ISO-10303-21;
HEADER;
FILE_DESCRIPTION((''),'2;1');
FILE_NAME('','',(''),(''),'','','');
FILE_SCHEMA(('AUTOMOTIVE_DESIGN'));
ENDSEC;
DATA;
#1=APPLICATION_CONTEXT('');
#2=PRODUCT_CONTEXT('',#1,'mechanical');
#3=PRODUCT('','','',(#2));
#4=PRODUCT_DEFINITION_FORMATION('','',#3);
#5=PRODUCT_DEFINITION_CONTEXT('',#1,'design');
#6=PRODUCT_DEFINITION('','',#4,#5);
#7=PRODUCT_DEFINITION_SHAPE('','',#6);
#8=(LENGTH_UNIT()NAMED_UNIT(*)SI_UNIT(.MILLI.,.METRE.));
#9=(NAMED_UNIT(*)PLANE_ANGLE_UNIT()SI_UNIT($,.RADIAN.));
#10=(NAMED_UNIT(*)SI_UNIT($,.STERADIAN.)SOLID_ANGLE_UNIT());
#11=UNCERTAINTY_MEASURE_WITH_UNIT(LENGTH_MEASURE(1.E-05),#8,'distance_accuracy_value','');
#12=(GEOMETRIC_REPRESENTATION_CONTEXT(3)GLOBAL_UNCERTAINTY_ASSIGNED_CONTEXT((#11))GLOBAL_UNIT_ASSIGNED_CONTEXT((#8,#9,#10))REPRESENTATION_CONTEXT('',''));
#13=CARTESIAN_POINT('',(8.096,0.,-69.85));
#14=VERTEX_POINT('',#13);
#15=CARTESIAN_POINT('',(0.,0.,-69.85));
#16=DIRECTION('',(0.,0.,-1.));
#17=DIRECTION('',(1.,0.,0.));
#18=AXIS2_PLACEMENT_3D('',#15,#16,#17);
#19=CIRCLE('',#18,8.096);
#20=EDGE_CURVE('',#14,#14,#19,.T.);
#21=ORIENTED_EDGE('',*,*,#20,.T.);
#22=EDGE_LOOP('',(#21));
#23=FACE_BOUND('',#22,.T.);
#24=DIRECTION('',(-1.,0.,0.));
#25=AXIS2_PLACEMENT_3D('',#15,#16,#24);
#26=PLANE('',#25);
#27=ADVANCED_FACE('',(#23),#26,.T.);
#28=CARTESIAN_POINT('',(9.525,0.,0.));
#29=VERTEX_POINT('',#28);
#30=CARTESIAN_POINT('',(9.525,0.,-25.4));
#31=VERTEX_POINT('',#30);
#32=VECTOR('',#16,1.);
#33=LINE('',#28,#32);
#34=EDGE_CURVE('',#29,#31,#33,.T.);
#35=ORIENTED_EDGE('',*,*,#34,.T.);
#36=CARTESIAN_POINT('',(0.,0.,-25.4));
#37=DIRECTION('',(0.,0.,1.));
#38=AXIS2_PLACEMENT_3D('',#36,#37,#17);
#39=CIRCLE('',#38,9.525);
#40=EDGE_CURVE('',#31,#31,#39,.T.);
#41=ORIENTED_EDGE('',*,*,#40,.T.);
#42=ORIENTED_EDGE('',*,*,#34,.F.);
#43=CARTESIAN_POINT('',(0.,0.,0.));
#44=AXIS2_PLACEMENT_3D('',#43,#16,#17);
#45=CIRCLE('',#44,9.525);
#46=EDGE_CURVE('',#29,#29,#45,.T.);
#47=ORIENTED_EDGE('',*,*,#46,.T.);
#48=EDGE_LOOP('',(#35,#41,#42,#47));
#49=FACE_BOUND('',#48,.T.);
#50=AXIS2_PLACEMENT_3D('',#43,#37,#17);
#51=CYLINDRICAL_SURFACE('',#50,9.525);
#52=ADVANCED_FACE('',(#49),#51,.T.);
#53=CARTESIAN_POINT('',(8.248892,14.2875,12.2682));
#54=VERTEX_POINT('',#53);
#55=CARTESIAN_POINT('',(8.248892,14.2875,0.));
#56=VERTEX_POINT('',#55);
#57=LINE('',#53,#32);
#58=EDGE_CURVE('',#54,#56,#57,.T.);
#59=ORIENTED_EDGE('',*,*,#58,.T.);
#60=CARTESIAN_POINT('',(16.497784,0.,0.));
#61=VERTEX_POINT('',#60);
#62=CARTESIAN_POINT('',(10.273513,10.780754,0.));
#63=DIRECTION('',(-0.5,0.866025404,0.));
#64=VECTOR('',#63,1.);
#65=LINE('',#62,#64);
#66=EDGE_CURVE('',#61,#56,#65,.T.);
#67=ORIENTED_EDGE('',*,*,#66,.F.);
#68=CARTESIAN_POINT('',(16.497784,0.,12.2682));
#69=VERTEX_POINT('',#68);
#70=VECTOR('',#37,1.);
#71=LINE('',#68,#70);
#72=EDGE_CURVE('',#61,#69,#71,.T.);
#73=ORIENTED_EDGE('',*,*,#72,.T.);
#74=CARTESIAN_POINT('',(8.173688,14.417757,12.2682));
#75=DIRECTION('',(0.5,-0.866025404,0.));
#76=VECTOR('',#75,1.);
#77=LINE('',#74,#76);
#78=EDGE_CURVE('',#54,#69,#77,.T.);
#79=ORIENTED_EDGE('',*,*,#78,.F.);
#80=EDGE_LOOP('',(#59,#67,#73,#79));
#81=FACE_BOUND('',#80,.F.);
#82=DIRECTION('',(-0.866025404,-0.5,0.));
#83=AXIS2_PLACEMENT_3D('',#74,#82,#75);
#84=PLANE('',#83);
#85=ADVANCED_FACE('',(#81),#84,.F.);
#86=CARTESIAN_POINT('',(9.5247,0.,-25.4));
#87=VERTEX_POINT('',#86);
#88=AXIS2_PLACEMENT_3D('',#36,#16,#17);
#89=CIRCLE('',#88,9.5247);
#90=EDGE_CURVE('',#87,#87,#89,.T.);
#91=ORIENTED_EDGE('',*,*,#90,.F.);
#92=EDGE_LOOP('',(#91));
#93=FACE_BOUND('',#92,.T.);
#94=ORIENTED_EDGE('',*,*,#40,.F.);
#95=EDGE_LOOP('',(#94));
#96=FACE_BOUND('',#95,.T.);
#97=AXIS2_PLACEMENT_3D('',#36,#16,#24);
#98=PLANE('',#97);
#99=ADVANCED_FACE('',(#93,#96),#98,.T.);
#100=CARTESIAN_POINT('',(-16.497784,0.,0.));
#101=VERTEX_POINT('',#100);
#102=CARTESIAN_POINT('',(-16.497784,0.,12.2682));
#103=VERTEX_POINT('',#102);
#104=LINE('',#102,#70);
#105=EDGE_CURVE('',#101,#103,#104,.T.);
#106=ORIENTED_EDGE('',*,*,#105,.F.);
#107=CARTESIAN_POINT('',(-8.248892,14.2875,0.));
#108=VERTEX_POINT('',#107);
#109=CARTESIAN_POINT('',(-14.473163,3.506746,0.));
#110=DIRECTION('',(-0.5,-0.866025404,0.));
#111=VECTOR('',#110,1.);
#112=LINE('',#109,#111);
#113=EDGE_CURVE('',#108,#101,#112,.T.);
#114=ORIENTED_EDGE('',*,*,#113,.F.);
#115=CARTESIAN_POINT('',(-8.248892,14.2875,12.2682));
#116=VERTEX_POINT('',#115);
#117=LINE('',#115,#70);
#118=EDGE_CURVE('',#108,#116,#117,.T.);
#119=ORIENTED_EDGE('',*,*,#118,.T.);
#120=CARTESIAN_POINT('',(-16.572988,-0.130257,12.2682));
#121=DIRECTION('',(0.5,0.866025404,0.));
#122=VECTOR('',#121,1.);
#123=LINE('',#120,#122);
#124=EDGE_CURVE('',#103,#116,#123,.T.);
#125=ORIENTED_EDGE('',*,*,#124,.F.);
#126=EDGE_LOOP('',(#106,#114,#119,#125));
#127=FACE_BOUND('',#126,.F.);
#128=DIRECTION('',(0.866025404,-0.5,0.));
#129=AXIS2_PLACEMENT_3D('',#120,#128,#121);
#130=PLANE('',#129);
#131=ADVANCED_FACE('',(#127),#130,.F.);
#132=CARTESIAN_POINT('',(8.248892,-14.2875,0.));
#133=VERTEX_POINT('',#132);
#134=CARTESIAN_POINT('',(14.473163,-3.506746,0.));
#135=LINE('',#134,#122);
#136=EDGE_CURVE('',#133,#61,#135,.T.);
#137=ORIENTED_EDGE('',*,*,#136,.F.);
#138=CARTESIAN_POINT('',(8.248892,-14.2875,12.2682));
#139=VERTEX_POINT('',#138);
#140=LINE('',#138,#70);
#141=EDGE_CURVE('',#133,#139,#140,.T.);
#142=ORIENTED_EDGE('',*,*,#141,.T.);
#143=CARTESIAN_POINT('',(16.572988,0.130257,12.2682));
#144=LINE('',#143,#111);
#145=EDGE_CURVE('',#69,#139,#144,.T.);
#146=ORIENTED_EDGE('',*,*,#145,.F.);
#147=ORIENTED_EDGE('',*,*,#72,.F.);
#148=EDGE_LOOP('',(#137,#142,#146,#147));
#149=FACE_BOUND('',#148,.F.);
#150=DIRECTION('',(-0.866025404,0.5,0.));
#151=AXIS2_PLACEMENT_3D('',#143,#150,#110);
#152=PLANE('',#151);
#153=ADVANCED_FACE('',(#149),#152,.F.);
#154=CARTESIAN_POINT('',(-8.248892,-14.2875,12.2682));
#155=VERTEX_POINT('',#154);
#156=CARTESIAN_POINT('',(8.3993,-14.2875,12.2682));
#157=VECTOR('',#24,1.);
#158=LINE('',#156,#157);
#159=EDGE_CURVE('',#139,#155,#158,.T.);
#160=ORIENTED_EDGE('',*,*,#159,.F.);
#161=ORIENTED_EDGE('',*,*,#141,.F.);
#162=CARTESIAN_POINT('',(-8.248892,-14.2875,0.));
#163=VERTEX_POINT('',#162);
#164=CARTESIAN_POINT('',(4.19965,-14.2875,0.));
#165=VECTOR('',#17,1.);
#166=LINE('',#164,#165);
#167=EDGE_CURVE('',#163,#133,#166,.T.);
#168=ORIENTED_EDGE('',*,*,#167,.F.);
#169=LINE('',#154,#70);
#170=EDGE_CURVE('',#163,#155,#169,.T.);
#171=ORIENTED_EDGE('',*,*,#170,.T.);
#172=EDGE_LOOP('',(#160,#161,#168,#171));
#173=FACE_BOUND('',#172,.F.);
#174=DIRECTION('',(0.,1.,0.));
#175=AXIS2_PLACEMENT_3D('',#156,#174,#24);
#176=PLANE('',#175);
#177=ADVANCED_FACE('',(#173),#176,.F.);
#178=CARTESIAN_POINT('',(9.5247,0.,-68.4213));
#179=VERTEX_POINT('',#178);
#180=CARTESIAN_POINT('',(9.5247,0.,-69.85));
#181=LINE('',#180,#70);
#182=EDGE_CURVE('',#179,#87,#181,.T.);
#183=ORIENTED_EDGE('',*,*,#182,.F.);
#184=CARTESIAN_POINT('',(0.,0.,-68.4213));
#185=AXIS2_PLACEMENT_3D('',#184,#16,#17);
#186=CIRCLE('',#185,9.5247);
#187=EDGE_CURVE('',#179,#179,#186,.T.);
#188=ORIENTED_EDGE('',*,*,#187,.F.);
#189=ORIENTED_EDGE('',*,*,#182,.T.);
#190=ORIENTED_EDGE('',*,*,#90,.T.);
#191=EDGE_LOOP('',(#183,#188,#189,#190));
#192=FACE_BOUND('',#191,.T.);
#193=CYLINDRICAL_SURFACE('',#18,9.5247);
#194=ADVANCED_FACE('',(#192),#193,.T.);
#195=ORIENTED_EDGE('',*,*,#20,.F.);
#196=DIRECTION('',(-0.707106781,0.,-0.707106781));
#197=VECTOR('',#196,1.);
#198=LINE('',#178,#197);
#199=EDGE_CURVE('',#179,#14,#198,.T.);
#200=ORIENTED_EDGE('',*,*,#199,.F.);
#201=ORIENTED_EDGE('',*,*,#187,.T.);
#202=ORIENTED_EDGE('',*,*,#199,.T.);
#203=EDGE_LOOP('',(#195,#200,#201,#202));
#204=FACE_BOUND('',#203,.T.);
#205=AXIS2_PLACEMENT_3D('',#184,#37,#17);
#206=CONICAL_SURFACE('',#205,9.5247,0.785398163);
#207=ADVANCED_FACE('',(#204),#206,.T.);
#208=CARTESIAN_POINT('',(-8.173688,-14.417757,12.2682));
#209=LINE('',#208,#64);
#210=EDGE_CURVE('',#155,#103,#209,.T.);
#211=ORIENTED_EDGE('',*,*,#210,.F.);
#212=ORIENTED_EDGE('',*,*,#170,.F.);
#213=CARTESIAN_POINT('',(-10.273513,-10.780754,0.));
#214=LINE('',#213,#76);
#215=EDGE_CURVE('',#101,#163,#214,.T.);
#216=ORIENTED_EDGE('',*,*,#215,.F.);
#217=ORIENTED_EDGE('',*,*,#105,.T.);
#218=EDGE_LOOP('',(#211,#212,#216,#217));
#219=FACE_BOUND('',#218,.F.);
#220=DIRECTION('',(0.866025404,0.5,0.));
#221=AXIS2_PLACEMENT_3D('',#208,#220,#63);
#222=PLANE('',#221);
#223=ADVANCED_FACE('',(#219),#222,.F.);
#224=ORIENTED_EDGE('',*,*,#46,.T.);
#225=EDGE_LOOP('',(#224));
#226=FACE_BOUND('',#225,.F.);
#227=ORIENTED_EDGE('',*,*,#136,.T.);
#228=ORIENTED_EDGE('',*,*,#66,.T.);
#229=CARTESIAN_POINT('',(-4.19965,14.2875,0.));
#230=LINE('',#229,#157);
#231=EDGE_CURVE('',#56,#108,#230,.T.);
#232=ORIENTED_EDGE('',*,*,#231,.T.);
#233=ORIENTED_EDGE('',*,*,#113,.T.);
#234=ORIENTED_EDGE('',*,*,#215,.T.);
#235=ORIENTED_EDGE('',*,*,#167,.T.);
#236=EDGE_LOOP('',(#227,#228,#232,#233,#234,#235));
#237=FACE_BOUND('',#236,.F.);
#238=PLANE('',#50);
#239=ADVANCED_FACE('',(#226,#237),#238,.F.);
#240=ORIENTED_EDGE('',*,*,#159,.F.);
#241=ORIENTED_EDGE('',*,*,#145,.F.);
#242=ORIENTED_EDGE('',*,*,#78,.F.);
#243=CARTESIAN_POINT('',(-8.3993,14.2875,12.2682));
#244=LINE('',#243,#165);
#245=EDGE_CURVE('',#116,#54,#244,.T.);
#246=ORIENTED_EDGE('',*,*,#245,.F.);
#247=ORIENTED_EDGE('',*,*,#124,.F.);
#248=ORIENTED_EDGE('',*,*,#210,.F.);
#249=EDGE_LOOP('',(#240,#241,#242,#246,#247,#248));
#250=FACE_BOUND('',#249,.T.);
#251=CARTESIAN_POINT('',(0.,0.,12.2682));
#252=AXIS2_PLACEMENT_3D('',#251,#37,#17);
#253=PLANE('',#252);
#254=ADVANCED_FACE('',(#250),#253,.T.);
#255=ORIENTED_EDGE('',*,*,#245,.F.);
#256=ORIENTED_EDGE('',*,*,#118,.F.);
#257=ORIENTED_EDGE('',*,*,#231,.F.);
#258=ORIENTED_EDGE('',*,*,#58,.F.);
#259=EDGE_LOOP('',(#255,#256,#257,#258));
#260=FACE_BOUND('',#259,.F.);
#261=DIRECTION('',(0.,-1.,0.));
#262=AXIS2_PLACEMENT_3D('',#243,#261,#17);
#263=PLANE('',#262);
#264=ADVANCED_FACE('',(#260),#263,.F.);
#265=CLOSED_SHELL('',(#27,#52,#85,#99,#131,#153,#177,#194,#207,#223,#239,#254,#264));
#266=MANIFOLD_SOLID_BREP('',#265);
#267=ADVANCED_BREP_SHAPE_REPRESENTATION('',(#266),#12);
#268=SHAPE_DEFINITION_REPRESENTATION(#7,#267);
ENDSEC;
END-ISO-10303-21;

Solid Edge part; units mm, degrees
sketch "Sketch1" plane through (0, 0, 0) normal (0, 0, 1) x (1, 0, 0)
  circle A0 centre (0, 0) radius 16.5735
  dimension "D1" = 33.147
extrude "Protrusion1" add sketch "Sketch1" along normal blind 12.2682
sketch "Sketch2" plane through (0, 0, 0) normal (0, 0, -1) x (1, 0, 0)
  circle A0 centre (0, 0) radius 9.525
extrude "Protrusion2" add sketch "Sketch2" along normal blind 69.85
sketch "Sketch3" plane through (0, 0, -69.85) normal (0, 0, -1) x (1, 0, 0)
  circle A0 centre (0, 0) radius 9.5247
extrude "Cutout1" cut sketch "Sketch3" against normal blind 44.45 flip side to cut
chamfer "Chamfer_1" distance 1.4287 angle 45 1 edges at (-9.5247, 0, -69.85)
sketch "Sketch4" plane through (0, 0, 12.2682) normal (0, 0, 1) x (1, 0, 0)
  line L0 (-8.3993, 14.2875) -> (8.3993, 14.2875)
  dimension "D1" = 28.575
extrude "Cutout2" cut sketch "Sketch4" against normal up to next material side at (0, 14.3375, 12.2682)
pattern_circular "Pattern1" count 6 over 360 about axis through (0, 0, 12.2682) along (0, 0, 1) of "Cutout2"
properties part number "24106038"
